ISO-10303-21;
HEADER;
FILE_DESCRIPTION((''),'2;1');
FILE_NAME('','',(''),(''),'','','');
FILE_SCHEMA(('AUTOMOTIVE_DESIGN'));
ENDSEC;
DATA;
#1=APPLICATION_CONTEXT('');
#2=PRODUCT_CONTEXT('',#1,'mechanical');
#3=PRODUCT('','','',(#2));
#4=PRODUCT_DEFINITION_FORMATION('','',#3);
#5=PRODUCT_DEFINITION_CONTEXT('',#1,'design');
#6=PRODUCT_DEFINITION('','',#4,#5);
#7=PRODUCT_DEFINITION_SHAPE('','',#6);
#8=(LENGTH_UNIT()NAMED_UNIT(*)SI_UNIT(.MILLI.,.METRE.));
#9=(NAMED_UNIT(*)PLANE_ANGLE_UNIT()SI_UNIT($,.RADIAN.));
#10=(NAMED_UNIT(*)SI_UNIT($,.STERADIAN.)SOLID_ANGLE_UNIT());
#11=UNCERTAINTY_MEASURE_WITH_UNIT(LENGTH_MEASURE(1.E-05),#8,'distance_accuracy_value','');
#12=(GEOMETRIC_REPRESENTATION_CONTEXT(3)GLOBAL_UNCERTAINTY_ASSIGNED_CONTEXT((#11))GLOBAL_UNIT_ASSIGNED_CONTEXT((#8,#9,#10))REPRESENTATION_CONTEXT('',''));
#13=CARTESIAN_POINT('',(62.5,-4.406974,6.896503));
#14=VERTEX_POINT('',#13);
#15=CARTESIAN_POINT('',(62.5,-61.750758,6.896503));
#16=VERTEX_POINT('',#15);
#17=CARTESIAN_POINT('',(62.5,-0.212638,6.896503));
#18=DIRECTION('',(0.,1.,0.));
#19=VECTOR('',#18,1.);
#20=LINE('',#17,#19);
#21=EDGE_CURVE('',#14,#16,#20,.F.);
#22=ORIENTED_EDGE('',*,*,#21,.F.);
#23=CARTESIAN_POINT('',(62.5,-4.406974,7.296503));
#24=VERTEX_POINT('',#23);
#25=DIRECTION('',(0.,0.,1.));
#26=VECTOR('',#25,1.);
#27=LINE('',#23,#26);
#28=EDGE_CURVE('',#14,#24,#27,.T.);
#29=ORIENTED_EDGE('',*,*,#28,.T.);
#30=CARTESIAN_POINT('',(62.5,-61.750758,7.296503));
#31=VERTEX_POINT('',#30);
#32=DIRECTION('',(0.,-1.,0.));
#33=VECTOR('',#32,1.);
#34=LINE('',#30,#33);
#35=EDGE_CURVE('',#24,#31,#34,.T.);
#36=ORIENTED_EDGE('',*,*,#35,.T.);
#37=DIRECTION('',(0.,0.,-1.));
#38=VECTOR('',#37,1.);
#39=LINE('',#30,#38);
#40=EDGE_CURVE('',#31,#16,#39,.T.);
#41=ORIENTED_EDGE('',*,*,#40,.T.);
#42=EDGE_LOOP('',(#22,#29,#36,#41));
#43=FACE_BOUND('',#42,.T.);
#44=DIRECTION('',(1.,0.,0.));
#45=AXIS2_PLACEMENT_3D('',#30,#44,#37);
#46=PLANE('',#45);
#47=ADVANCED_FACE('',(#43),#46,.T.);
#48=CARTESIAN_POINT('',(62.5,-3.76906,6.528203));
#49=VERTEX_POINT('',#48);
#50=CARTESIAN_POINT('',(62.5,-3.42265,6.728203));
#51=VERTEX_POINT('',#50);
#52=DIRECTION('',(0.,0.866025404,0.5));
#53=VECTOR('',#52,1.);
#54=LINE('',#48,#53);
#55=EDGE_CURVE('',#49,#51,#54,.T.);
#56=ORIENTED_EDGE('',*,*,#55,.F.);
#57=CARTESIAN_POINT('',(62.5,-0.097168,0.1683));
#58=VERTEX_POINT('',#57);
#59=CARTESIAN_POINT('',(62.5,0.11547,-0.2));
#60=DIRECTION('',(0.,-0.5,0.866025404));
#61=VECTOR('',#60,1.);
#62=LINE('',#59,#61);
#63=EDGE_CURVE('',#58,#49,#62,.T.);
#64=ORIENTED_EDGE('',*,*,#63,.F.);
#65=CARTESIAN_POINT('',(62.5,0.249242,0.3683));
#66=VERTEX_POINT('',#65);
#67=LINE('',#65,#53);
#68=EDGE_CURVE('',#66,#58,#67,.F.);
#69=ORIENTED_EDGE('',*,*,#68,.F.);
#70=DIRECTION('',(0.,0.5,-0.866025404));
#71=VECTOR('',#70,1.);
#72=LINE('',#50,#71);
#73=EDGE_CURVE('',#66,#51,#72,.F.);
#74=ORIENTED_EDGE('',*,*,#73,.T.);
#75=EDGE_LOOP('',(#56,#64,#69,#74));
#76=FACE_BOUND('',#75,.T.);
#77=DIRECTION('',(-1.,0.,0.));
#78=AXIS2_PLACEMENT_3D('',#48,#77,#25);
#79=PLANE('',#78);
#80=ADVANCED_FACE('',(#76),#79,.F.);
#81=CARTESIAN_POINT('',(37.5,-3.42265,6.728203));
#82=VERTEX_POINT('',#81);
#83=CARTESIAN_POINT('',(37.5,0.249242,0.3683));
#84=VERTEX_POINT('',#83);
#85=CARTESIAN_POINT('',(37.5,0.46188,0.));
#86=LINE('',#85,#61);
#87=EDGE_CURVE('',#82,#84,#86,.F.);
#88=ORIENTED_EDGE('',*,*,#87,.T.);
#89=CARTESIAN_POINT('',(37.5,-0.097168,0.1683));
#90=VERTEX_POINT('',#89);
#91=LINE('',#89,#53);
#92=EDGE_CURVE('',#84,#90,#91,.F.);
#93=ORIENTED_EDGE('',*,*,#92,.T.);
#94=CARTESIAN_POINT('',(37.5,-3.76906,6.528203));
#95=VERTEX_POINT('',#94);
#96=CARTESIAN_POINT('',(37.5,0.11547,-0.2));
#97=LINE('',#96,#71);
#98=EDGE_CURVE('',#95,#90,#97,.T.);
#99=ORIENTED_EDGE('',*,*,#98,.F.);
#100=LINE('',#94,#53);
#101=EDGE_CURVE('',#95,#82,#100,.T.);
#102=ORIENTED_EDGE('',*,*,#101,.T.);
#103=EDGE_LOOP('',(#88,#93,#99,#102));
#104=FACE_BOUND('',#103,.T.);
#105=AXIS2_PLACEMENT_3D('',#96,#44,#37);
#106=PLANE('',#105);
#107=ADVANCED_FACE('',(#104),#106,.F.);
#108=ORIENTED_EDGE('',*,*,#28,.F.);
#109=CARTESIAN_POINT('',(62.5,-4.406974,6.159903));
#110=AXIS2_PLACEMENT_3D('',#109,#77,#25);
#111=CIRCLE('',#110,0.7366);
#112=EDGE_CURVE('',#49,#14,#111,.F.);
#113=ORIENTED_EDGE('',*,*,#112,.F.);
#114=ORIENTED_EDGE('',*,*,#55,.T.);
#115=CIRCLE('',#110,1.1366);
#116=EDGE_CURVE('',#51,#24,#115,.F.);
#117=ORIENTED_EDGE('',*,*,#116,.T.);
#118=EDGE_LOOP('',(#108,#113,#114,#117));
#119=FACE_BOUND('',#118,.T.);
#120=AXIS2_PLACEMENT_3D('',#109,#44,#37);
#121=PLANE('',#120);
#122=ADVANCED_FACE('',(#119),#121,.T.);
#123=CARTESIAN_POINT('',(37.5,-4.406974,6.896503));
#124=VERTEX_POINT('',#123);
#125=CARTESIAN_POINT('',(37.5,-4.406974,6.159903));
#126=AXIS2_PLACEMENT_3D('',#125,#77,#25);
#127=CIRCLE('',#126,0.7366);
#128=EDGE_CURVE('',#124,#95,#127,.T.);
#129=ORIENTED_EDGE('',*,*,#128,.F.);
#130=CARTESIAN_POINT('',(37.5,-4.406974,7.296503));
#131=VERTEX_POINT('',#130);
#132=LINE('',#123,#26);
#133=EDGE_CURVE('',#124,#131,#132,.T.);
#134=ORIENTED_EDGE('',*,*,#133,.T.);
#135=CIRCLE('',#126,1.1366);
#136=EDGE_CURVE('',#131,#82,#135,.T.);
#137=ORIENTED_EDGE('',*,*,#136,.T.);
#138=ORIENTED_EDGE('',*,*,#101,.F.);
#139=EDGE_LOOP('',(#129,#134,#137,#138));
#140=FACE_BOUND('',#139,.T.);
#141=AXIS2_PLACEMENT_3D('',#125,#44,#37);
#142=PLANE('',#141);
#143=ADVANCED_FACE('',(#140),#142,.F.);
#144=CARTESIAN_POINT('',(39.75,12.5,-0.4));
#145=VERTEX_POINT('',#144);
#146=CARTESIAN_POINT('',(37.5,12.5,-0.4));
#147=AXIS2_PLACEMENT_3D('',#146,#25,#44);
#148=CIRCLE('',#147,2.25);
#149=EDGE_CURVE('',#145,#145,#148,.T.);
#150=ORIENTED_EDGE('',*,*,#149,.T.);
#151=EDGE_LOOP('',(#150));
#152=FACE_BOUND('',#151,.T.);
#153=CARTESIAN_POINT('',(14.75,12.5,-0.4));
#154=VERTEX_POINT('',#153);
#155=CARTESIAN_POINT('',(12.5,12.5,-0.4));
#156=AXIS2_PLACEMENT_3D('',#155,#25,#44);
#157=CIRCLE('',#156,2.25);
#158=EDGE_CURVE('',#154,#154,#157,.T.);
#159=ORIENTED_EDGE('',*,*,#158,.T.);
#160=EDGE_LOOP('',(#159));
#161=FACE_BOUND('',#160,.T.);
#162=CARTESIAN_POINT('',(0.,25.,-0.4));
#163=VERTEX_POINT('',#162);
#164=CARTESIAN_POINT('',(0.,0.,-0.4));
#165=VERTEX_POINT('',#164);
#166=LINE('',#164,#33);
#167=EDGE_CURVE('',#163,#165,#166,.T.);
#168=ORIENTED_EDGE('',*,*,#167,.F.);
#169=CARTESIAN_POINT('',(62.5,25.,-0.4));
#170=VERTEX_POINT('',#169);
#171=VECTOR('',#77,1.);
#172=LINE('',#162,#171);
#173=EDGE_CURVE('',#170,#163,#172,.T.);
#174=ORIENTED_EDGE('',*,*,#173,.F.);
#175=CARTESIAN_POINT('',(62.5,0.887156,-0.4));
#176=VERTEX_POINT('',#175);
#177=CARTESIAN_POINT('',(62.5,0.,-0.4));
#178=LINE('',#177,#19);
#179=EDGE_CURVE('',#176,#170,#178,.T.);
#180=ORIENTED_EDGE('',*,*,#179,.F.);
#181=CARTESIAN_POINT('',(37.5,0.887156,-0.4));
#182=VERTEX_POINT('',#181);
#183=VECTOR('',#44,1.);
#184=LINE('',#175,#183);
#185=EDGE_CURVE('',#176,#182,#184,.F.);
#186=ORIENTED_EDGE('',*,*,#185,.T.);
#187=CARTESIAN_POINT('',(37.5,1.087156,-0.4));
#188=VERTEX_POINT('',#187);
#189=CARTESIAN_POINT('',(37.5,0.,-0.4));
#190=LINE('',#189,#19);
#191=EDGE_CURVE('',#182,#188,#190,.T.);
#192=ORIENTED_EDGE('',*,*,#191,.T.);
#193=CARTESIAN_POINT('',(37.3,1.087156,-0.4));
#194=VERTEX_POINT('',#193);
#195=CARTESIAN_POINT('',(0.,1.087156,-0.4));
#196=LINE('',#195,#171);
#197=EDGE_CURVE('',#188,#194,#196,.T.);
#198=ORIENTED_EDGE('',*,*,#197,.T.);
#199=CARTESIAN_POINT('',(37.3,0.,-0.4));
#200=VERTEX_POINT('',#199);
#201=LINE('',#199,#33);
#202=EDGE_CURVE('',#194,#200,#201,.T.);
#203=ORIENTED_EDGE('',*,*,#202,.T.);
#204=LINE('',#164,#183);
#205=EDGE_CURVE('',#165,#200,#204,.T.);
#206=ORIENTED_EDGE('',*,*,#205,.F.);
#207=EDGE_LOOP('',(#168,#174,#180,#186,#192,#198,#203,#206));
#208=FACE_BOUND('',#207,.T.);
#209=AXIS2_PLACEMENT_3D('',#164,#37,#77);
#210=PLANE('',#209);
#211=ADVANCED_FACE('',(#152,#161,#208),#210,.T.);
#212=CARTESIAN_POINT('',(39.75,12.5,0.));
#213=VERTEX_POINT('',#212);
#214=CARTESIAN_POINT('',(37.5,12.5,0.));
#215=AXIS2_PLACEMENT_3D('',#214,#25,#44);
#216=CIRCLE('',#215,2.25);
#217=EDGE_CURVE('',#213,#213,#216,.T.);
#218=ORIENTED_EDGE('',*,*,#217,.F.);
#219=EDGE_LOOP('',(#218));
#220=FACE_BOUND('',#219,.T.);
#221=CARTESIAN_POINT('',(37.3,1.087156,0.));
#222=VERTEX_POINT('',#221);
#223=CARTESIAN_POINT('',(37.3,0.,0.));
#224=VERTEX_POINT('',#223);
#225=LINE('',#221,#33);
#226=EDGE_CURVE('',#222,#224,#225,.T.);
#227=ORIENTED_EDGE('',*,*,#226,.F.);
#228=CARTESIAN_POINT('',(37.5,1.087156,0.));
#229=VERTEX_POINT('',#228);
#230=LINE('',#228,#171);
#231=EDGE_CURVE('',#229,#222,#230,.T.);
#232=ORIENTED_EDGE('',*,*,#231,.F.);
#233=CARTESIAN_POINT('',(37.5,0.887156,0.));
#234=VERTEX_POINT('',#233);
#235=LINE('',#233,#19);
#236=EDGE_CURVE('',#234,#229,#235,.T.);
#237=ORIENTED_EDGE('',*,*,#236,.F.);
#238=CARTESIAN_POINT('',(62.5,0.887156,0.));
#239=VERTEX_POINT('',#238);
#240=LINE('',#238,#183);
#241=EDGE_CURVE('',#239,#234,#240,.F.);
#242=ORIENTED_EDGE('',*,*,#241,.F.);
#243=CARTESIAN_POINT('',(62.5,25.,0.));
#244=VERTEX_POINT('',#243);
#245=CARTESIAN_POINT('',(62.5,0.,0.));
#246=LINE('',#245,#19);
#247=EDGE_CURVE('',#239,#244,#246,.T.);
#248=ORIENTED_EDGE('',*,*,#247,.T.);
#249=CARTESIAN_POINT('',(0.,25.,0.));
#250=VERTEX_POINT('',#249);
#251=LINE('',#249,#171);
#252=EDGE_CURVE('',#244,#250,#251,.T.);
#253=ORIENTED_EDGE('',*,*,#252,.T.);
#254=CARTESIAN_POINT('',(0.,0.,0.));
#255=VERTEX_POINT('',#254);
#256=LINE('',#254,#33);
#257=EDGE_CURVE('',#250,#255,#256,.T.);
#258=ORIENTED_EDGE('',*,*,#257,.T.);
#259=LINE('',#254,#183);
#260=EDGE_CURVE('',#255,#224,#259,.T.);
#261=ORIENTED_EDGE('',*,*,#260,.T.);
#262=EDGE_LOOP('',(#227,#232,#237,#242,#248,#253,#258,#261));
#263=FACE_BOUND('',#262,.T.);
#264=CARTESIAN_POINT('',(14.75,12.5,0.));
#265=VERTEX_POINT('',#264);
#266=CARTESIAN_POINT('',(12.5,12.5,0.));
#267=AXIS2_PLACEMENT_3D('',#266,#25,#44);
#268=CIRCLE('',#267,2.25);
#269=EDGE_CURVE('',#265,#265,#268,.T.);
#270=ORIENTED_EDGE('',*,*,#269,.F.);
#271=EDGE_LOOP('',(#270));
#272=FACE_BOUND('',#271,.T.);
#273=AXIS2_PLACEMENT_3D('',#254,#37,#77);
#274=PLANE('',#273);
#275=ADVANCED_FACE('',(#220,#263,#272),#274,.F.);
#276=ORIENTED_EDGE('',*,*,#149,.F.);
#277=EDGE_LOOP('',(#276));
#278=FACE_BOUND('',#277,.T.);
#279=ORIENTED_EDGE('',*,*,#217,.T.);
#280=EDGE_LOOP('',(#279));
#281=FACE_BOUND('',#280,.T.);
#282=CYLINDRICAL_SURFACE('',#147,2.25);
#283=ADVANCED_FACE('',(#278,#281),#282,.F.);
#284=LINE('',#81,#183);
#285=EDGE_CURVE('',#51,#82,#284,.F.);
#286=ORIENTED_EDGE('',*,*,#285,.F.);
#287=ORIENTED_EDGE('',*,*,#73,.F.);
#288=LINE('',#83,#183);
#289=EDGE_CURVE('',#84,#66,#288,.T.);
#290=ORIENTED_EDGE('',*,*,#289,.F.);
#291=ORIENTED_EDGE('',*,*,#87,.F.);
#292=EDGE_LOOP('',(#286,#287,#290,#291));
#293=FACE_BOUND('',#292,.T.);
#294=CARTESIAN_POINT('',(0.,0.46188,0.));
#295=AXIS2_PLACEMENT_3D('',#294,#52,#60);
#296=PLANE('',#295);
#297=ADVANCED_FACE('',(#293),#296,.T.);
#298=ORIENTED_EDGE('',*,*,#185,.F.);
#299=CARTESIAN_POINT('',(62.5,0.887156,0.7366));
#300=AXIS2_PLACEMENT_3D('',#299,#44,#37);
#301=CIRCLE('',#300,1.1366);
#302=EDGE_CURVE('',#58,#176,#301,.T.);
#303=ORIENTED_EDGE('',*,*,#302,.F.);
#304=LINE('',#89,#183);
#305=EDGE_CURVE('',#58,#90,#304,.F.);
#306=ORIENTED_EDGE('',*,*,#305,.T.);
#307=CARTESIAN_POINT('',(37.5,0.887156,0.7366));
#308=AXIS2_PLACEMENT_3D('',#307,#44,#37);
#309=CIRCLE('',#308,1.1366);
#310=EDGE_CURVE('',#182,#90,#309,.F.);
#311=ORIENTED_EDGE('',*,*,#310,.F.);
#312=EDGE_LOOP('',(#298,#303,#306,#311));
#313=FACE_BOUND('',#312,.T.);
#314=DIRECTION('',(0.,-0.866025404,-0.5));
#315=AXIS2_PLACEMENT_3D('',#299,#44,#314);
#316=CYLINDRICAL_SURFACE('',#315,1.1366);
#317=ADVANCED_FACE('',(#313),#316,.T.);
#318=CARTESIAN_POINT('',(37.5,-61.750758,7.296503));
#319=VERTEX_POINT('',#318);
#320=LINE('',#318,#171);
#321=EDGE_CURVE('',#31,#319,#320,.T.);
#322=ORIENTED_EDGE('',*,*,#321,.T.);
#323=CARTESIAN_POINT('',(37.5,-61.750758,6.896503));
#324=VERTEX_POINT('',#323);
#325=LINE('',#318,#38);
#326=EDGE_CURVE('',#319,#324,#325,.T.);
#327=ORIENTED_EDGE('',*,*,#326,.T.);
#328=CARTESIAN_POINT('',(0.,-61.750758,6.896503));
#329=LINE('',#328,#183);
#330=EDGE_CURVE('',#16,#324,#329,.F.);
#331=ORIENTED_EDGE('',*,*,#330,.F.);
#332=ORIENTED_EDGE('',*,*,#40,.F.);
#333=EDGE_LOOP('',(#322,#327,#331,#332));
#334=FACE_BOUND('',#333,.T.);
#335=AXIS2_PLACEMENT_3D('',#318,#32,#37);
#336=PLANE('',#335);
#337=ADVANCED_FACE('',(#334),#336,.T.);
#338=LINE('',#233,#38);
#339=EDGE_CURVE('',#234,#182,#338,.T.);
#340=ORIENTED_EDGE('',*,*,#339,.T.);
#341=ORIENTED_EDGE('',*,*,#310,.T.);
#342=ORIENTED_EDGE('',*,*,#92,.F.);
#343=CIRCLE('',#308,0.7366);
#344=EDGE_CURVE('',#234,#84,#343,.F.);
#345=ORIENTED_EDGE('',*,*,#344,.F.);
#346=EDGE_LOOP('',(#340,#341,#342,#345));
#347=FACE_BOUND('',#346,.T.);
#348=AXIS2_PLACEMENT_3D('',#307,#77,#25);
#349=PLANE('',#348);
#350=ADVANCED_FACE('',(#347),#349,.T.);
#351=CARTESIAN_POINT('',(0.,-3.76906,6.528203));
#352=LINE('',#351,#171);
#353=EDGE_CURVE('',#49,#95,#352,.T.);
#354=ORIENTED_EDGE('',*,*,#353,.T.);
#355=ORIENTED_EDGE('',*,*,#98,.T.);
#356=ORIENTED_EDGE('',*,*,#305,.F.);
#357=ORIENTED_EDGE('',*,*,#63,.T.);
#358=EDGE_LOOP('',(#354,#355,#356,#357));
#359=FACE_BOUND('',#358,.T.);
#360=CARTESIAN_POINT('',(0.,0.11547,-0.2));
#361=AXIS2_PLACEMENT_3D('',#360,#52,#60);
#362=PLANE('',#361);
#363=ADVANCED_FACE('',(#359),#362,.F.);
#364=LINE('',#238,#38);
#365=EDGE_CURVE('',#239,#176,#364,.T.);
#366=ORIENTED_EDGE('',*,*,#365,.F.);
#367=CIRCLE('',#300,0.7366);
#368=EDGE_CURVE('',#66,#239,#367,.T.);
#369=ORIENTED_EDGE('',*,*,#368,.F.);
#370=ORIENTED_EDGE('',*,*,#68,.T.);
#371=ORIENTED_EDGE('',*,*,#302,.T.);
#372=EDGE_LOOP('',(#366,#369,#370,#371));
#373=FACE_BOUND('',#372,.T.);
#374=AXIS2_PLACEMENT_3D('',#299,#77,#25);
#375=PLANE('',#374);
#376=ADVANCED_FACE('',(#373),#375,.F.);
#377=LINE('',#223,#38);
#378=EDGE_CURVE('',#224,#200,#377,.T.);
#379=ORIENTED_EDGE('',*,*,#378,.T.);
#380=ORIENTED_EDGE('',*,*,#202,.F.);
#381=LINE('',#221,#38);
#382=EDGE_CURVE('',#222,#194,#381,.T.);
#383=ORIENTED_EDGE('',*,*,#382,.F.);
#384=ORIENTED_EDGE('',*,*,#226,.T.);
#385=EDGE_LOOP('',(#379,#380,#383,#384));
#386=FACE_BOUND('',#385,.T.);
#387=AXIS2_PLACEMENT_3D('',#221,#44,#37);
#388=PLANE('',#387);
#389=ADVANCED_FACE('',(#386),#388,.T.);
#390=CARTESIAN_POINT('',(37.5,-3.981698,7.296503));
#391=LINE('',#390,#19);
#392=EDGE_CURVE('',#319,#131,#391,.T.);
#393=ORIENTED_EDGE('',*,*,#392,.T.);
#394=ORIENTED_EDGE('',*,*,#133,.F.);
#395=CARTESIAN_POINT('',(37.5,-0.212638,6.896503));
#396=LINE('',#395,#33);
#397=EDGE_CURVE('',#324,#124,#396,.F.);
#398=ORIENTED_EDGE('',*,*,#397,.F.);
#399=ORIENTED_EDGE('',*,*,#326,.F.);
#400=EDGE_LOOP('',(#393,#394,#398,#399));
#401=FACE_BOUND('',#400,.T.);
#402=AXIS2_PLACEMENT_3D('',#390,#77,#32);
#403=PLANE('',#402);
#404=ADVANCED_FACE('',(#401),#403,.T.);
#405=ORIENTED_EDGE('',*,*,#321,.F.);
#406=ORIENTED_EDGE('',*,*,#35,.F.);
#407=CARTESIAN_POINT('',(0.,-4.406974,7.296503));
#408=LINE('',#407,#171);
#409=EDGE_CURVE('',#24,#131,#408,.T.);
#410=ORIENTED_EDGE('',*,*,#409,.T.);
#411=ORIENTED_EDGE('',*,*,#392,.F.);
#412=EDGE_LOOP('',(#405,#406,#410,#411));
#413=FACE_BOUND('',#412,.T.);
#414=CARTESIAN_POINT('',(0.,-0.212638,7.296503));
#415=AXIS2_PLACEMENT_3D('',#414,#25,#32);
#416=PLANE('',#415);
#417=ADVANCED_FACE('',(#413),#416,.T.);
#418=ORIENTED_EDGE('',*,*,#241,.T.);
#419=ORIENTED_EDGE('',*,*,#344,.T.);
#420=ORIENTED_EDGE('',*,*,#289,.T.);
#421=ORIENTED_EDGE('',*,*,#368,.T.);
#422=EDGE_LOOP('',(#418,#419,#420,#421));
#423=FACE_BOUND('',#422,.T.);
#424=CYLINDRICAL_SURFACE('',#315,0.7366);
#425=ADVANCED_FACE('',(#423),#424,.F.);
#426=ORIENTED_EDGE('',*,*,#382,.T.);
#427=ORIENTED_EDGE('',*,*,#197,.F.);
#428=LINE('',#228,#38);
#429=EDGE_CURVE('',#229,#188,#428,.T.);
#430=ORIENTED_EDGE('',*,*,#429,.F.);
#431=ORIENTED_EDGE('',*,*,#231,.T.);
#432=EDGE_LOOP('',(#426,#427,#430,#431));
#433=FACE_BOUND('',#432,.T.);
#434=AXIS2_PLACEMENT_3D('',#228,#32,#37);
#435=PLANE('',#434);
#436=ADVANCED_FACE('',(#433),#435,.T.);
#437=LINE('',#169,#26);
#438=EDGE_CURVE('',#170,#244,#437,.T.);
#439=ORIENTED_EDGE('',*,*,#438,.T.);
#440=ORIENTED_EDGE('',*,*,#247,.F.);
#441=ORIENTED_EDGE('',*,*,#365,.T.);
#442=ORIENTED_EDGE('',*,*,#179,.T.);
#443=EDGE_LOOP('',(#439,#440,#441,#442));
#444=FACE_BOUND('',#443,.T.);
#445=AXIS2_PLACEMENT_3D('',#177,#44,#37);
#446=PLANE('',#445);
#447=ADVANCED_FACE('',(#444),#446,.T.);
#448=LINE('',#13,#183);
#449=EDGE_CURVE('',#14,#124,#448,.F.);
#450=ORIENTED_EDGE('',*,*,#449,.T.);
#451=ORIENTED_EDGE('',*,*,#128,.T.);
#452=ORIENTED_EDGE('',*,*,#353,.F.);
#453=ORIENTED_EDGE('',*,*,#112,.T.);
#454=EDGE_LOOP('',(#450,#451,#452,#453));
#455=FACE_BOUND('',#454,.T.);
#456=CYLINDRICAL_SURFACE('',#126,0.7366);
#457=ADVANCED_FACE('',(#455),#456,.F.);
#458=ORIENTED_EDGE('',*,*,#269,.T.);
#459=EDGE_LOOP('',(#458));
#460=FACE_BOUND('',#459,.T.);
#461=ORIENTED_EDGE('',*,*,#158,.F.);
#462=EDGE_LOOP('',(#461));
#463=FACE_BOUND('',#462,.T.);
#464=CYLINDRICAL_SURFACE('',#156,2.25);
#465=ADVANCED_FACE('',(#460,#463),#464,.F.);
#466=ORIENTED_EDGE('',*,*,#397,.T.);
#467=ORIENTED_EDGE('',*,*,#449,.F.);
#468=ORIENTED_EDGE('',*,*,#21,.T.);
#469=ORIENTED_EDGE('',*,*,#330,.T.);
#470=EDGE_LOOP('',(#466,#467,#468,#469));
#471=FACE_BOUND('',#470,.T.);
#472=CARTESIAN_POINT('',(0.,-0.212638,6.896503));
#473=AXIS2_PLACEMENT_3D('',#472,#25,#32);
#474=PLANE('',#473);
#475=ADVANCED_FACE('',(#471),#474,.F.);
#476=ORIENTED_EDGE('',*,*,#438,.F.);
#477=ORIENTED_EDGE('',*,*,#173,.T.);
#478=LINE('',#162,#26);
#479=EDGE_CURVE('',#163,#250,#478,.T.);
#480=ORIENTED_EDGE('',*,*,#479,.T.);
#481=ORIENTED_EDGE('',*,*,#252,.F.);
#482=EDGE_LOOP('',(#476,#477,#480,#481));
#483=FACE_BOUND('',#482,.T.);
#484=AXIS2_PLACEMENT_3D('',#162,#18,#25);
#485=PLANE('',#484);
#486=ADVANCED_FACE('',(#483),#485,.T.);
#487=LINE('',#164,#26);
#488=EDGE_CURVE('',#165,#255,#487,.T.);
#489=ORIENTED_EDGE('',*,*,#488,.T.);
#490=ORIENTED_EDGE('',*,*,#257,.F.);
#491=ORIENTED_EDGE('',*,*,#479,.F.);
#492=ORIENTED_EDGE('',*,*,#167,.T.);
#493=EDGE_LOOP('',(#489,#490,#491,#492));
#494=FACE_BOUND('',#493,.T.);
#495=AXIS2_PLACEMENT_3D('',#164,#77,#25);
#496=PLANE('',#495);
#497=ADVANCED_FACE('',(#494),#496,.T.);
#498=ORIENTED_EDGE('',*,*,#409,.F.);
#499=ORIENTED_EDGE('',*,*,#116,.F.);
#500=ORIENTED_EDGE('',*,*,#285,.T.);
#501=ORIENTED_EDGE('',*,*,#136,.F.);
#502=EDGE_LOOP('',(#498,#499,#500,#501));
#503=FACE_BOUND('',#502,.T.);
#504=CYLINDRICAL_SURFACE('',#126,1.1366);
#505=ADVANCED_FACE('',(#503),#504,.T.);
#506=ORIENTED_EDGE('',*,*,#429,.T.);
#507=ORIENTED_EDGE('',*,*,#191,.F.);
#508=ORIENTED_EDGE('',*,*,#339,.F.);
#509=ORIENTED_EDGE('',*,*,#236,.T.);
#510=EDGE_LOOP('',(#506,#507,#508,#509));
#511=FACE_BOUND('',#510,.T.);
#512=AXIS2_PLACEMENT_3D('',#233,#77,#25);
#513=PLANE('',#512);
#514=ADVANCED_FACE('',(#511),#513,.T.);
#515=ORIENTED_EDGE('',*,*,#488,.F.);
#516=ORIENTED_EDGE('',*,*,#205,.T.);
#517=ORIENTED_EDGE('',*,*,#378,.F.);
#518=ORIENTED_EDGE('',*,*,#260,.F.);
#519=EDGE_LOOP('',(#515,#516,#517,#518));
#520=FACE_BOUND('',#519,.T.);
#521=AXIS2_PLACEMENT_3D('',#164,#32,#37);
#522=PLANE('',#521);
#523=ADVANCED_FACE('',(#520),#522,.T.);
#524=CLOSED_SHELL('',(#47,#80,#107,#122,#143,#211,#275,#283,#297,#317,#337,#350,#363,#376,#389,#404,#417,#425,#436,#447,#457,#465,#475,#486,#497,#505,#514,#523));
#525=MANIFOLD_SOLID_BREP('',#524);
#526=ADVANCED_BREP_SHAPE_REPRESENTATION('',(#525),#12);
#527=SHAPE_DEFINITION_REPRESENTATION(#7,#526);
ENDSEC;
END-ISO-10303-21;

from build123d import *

# Parameters (mm, degrees)
SKETCH1_W            = 62.5
SKETCH1_H            = 25
SKETCH1_R            = 2.25
BASE_FLANGE1_DEPTH   = 0.4
EDGE_FLANGE1_START   = 37.3
EDGE_FLANGE1_DEPTH   = 25.2
EDGE_FLANGE1_2_DEPTH = 0.2
EDGE_FLANGE1_START_2 = 37.5
EDGE_FLANGE1_3_DEPTH = 25
EDGE_FLANGE2_DEPTH   = 25


# Read off the part's stored shape, not the designer's step: Edge-Flange1
# Sheet-metal steps are written as plain solids
with BuildPart() as part:
    # Sketch1 → Base-Flange1 (new body)
    with BuildSketch(Plane.XY):
        with Locations((31.25, 12.5)):
            Rectangle(SKETCH1_W, SKETCH1_H)
        with Locations((12.5, 12.5)):
            Circle(SKETCH1_R, mode=Mode.SUBTRACT)
        with Locations((37.5, 12.5)):
            Circle(SKETCH1_R, mode=Mode.SUBTRACT)
    extrude(amount=-BASE_FLANGE1_DEPTH)

    # Edge-Flange1 outline → Edge-Flange1 (cut)
    with BuildSketch(Plane.YZ.offset(EDGE_FLANGE1_START)):
        with BuildLine():
            Line((0, -0.4), (0.887156424, -0.4))
            ThreePointArc((0.887156424, -0.4), (0.410375552, -0.295165264), (0.021546812, 0))
            Line((0.021546812, 0), (0, 0))
            Line((0, 0), (0, -0.4))
        make_face()
    extrude(amount=EDGE_FLANGE1_DEPTH, mode=Mode.SUBTRACT)

    # Edge-Flange1 2 outline → Edge-Flange1 2 (cut)
    with BuildSketch(Plane.YZ.offset(EDGE_FLANGE1_START)):
        with BuildLine():
            Line((1.087156424, -0.4), (1.087156424, 0))
            Line((1.087156424, 0), (0.021546812, 0))
            ThreePointArc((0.021546812, 0), (0.410375552, -0.295165264), (0.887156424, -0.4))
            Line((0.887156424, -0.4), (1.087156424, -0.4))
        make_face()
    extrude(amount=EDGE_FLANGE1_2_DEPTH, mode=Mode.SUBTRACT)

    # Edge-Flange1 3 outline → Edge-Flange1 3 (add)
    with BuildSketch(Plane.YZ.offset(EDGE_FLANGE1_START_2)):
        with BuildLine():
            Line((0.021546812, 0), (0.887156424, 0))
            ThreePointArc((0.887156424, 0), (0.518856424, 0.098685688), (0.249242111, 0.3683))
            Line((0.249242111, 0.3683), (-3.422649731, 6.72820323))
            Line((-3.422649731, 6.72820323), (-3.769059892, 6.52820323))
            Line((-3.769059892, 6.52820323), (-0.09716805, 0.1683))
            ThreePointArc((-0.09716805, 0.1683), (-0.041630555, 0.081455507), (0.021546812, 0))
        make_face()
    extrude(amount=EDGE_FLANGE1_3_DEPTH)

    # Edge-Flange2 section (across the edge) → Edge-Flange2 (add)
    with BuildSketch(Plane(origin=(62.5, -3.981697996, 6.89650323), x_dir=(0, 0, -1), z_dir=(-1, 0, 0))):
        with BuildLine():
            Line((-0.4, 0.425276208), (-0.4, 57.769059892))
            Line((-0.4, 57.769059892), (0, 57.769059892))
            Line((0, 57.769059892), (0, 0.425276208))
            ThreePointArc((0, 0.425276208), (0.098685688, 0.056976208), (0.3683, -0.212638104))
            Line((0.3683, -0.212638104), (0.1683, -0.559048266))
            ThreePointArc((0.1683, -0.559048266), (-0.247724474, -0.143023792), (-0.4, 0.425276208))
        make_face()
    extrude(amount=EDGE_FLANGE2_DEPTH)


solid = part.part
